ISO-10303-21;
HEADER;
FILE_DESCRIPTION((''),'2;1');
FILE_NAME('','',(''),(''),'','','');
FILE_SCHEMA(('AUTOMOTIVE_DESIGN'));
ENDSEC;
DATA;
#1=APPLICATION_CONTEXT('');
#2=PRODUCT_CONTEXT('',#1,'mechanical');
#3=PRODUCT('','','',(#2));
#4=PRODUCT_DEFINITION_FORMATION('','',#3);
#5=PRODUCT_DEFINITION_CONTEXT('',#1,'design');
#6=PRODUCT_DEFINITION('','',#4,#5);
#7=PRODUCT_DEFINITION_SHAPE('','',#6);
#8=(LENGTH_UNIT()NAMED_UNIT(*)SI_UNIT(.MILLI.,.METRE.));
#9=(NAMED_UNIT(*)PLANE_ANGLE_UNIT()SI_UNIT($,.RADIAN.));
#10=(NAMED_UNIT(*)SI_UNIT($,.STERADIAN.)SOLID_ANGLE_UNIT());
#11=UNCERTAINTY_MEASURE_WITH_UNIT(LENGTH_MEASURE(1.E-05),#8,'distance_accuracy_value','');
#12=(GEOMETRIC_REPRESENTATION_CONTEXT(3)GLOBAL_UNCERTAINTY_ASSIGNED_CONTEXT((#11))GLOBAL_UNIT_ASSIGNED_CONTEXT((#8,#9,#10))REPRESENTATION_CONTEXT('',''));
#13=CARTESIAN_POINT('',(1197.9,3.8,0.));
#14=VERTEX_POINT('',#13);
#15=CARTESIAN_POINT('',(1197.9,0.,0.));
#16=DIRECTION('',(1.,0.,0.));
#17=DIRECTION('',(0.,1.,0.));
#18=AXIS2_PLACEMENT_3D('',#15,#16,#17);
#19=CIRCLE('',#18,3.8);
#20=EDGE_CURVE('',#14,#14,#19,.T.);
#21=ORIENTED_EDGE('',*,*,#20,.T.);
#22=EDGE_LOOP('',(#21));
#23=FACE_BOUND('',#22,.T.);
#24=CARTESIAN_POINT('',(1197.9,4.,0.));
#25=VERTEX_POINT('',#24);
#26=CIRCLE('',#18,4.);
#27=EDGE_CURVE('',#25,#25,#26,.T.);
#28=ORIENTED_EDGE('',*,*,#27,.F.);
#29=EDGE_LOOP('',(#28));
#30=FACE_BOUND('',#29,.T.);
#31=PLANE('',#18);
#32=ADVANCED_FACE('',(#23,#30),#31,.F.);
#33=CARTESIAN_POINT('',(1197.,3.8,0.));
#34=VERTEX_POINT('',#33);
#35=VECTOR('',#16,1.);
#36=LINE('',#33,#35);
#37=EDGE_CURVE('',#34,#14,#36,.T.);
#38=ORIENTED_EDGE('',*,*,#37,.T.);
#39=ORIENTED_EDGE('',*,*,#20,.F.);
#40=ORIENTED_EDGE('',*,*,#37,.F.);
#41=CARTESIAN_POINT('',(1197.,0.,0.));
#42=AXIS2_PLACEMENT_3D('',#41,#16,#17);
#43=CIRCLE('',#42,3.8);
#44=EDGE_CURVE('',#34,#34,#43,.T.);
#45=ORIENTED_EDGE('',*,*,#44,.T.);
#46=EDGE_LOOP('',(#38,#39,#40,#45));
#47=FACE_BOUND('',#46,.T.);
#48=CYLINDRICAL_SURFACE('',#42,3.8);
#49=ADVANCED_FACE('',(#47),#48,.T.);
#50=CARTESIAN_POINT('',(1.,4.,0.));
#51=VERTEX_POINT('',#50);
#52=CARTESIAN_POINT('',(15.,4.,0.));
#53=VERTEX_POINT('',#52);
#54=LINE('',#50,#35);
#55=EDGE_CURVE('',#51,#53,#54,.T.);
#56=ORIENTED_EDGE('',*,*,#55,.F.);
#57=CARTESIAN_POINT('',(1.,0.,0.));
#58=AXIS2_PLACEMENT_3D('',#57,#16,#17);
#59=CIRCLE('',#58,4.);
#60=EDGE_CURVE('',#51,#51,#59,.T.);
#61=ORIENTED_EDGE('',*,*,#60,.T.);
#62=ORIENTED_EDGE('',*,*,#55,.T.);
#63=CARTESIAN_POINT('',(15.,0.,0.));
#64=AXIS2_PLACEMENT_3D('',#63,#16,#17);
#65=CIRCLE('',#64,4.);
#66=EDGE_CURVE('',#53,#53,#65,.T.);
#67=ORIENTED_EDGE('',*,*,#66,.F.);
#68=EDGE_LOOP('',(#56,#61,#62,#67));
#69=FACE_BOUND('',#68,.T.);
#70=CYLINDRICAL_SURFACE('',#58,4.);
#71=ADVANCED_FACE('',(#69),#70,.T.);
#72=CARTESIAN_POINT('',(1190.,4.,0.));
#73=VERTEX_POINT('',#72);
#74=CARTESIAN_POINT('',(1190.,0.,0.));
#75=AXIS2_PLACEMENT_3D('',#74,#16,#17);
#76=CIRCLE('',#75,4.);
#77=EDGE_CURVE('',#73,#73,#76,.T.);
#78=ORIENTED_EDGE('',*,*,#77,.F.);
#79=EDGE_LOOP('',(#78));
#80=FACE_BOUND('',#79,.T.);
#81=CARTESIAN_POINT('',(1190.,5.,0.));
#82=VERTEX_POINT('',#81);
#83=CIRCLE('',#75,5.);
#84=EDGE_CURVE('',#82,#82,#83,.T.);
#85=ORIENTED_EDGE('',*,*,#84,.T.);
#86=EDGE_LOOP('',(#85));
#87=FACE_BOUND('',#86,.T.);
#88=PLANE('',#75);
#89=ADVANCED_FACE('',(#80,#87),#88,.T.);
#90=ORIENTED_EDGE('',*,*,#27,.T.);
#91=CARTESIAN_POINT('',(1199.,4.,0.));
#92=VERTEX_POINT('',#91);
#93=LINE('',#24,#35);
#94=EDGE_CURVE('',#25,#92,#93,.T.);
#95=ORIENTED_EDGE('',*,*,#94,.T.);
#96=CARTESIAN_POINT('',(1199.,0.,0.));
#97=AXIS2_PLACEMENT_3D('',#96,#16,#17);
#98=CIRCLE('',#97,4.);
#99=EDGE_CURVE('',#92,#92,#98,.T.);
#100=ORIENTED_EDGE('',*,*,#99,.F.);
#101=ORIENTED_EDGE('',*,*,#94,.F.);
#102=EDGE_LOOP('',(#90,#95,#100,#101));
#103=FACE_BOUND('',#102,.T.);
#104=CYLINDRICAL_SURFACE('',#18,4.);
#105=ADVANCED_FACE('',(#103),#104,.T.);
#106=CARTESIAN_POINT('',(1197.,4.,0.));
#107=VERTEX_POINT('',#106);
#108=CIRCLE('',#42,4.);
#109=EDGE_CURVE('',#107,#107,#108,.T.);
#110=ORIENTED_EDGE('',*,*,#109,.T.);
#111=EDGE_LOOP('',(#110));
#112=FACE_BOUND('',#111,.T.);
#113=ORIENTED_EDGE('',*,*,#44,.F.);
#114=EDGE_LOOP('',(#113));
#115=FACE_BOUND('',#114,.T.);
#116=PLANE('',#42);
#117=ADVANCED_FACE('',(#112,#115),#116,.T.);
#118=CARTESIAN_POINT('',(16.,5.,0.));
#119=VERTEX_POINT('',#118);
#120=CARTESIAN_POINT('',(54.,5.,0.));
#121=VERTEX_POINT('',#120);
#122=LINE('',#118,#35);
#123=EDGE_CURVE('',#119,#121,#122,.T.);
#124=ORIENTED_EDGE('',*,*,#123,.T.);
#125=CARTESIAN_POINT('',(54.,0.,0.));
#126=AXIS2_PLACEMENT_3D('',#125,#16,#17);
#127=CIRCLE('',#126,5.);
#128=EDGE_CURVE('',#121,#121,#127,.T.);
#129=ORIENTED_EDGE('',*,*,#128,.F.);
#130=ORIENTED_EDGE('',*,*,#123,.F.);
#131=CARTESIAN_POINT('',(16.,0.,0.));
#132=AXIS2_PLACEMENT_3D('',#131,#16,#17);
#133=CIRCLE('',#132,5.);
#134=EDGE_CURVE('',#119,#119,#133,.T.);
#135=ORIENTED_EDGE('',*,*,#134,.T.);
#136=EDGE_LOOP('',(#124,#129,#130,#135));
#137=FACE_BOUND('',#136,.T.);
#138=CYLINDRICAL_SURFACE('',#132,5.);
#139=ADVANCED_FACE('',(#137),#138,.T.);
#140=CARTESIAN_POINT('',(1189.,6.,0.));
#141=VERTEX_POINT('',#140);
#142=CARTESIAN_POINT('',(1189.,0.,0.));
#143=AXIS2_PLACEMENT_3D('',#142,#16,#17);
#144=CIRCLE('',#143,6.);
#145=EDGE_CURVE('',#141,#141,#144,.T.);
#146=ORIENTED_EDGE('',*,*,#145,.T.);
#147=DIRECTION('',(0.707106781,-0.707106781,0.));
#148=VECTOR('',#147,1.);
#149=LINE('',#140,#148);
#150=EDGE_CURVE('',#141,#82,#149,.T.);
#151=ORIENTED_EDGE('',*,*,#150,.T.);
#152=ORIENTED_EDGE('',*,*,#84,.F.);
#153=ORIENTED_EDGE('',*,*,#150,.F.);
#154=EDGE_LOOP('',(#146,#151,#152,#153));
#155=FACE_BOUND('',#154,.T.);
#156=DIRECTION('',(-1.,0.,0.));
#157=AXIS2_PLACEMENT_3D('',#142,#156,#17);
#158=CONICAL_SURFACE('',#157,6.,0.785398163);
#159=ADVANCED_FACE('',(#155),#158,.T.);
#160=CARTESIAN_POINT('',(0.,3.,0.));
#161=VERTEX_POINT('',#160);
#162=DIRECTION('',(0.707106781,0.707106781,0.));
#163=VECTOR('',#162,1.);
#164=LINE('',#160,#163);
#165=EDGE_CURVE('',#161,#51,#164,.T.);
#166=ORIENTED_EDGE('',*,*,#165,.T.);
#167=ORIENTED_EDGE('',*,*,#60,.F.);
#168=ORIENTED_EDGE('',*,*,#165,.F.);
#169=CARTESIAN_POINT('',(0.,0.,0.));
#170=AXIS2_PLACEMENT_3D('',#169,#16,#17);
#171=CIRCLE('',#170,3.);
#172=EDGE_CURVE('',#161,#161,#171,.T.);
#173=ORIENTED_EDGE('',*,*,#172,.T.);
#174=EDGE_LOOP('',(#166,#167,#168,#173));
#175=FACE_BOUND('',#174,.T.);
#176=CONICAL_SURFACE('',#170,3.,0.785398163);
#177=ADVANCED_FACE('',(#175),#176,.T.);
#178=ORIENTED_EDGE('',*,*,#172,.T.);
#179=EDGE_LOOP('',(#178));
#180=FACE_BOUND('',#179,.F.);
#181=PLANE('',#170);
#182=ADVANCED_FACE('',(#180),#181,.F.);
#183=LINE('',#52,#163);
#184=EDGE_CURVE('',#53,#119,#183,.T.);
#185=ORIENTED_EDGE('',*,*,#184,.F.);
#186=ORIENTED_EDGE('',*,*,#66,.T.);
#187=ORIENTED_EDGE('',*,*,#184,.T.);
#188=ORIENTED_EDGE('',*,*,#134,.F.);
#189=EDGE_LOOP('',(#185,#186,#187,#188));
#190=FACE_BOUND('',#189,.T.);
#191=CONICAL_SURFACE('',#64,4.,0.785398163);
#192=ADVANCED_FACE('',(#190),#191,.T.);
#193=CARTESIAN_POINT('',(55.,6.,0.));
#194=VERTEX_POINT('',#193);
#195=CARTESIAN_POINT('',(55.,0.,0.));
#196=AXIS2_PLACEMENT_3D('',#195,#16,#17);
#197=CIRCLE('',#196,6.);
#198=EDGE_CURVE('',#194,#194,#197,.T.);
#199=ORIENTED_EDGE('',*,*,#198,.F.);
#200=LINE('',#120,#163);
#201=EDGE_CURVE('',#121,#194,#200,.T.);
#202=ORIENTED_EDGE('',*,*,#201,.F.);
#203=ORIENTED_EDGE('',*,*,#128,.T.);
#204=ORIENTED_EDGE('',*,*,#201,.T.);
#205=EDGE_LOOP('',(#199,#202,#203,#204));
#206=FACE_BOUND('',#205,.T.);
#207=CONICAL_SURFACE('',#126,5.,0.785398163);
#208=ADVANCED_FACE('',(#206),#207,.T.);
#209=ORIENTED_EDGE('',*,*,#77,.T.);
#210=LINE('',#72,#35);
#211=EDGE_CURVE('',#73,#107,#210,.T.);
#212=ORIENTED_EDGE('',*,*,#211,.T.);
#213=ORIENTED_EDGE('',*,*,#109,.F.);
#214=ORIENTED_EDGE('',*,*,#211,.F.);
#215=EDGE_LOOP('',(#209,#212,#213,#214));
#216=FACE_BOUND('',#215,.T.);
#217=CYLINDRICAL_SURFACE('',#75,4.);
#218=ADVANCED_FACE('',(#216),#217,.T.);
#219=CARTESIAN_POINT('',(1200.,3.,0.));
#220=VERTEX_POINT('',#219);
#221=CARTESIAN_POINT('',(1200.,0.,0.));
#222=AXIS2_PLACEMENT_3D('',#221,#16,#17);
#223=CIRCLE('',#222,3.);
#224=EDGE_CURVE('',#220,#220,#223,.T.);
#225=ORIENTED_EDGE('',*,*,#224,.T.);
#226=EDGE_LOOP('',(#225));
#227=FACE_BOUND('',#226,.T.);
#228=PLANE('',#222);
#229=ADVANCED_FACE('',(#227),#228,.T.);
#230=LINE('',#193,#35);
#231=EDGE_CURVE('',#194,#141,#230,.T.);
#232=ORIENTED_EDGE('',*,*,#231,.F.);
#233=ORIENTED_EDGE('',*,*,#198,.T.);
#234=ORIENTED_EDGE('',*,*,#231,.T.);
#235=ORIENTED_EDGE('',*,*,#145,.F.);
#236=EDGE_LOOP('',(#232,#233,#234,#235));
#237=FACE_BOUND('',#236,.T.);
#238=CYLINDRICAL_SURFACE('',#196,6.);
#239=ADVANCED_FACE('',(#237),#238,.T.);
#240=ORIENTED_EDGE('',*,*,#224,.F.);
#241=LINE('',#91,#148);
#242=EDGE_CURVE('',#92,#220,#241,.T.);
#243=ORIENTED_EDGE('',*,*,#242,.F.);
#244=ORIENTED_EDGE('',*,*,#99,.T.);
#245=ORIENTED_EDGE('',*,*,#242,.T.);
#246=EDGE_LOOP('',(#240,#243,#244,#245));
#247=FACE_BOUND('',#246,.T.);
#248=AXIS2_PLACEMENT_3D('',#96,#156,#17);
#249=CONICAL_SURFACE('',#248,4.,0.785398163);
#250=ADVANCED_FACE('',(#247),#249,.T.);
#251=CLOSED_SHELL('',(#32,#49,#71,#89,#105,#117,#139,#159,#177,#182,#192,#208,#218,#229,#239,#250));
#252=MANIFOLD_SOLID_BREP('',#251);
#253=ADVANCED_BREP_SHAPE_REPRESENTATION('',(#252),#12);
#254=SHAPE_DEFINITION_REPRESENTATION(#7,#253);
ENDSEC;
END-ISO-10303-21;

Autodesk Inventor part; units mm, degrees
ref_plane "YZ Plane" through (0, 0, 0) normal (1, 0, 0) x (0, 1, 0)
ref_plane "XZ Plane" through (0, 0, 0) normal (0, 1, 0) x (-1, 0, 0)
ref_plane "XY Plane" through (0, 0, 0) normal (0, 0, 1) x (1, 0, 0)
sketch "Sketch1" plane through (0, 0, 0) normal (0, 0, 1) x (1, 0, 0)
  line L0 (0, 4) -> (1, 4) construction
  line L1 (15, 4) -> (16, 5)
  line L2 (16, 5) -> (54, 5)
  line L3 (0, 4) -> (0, 3) construction
  line L4 (54, 5) -> (55, 6)
  line L5 (55, 6) -> (1189, 6)
  line L6 (0, 3) -> (1, 4)
  line L7 (0, 3) -> (0, 0)
  line L8 (1, 4) -> (15, 4)
  line L9 (1189, 6) -> (1190, 5)
  line L10 (1190, 5) -> (1190, 4)
  line L11 (1190, 4) -> (1197, 4)
  line L12 (1197, 4) -> (1197, 3.8)
  line L13 (1197, 3.8) -> (1197.9, 3.8)
  line L14 (1197.9, 3.8) -> (1197.9, 4)
  line L15 (1197.9, 4) -> (1199, 4)
  line L16 (1199, 4) -> (1200, 3)
  line L17 (1200, 3) -> (1200, 0)
  line L18 (0, 0) -> (1200, 0)
  point P0 (0, 0)
  point P1 (1200, 1.5)
  dimension "d0" = 4
  dimension "d1" = 5
  dimension "d2" = 6
  dimension "d3" = 135
  dimension "d4" = 135
  dimension "d5" = 15
  dimension "d6" = 39
  dimension "d7" = 135
  dimension "d8" = 4
  dimension "d9" = 7
  dimension "d10" = 10
  dimension "d11" = 0.2
  dimension "d12" = 0.9
  dimension "d14" = 135
  dimension "d15" = 1200
revolve "Revolution1" add sketch "Sketch1" angle 360 about axis through (0, 0, 0) along (1, 0, 0)
equation "\"d15\" = SHAFT_LEN"
equation "\"SHAFT_LEN\" = 1200"
properties part number "SFU1204-800"
